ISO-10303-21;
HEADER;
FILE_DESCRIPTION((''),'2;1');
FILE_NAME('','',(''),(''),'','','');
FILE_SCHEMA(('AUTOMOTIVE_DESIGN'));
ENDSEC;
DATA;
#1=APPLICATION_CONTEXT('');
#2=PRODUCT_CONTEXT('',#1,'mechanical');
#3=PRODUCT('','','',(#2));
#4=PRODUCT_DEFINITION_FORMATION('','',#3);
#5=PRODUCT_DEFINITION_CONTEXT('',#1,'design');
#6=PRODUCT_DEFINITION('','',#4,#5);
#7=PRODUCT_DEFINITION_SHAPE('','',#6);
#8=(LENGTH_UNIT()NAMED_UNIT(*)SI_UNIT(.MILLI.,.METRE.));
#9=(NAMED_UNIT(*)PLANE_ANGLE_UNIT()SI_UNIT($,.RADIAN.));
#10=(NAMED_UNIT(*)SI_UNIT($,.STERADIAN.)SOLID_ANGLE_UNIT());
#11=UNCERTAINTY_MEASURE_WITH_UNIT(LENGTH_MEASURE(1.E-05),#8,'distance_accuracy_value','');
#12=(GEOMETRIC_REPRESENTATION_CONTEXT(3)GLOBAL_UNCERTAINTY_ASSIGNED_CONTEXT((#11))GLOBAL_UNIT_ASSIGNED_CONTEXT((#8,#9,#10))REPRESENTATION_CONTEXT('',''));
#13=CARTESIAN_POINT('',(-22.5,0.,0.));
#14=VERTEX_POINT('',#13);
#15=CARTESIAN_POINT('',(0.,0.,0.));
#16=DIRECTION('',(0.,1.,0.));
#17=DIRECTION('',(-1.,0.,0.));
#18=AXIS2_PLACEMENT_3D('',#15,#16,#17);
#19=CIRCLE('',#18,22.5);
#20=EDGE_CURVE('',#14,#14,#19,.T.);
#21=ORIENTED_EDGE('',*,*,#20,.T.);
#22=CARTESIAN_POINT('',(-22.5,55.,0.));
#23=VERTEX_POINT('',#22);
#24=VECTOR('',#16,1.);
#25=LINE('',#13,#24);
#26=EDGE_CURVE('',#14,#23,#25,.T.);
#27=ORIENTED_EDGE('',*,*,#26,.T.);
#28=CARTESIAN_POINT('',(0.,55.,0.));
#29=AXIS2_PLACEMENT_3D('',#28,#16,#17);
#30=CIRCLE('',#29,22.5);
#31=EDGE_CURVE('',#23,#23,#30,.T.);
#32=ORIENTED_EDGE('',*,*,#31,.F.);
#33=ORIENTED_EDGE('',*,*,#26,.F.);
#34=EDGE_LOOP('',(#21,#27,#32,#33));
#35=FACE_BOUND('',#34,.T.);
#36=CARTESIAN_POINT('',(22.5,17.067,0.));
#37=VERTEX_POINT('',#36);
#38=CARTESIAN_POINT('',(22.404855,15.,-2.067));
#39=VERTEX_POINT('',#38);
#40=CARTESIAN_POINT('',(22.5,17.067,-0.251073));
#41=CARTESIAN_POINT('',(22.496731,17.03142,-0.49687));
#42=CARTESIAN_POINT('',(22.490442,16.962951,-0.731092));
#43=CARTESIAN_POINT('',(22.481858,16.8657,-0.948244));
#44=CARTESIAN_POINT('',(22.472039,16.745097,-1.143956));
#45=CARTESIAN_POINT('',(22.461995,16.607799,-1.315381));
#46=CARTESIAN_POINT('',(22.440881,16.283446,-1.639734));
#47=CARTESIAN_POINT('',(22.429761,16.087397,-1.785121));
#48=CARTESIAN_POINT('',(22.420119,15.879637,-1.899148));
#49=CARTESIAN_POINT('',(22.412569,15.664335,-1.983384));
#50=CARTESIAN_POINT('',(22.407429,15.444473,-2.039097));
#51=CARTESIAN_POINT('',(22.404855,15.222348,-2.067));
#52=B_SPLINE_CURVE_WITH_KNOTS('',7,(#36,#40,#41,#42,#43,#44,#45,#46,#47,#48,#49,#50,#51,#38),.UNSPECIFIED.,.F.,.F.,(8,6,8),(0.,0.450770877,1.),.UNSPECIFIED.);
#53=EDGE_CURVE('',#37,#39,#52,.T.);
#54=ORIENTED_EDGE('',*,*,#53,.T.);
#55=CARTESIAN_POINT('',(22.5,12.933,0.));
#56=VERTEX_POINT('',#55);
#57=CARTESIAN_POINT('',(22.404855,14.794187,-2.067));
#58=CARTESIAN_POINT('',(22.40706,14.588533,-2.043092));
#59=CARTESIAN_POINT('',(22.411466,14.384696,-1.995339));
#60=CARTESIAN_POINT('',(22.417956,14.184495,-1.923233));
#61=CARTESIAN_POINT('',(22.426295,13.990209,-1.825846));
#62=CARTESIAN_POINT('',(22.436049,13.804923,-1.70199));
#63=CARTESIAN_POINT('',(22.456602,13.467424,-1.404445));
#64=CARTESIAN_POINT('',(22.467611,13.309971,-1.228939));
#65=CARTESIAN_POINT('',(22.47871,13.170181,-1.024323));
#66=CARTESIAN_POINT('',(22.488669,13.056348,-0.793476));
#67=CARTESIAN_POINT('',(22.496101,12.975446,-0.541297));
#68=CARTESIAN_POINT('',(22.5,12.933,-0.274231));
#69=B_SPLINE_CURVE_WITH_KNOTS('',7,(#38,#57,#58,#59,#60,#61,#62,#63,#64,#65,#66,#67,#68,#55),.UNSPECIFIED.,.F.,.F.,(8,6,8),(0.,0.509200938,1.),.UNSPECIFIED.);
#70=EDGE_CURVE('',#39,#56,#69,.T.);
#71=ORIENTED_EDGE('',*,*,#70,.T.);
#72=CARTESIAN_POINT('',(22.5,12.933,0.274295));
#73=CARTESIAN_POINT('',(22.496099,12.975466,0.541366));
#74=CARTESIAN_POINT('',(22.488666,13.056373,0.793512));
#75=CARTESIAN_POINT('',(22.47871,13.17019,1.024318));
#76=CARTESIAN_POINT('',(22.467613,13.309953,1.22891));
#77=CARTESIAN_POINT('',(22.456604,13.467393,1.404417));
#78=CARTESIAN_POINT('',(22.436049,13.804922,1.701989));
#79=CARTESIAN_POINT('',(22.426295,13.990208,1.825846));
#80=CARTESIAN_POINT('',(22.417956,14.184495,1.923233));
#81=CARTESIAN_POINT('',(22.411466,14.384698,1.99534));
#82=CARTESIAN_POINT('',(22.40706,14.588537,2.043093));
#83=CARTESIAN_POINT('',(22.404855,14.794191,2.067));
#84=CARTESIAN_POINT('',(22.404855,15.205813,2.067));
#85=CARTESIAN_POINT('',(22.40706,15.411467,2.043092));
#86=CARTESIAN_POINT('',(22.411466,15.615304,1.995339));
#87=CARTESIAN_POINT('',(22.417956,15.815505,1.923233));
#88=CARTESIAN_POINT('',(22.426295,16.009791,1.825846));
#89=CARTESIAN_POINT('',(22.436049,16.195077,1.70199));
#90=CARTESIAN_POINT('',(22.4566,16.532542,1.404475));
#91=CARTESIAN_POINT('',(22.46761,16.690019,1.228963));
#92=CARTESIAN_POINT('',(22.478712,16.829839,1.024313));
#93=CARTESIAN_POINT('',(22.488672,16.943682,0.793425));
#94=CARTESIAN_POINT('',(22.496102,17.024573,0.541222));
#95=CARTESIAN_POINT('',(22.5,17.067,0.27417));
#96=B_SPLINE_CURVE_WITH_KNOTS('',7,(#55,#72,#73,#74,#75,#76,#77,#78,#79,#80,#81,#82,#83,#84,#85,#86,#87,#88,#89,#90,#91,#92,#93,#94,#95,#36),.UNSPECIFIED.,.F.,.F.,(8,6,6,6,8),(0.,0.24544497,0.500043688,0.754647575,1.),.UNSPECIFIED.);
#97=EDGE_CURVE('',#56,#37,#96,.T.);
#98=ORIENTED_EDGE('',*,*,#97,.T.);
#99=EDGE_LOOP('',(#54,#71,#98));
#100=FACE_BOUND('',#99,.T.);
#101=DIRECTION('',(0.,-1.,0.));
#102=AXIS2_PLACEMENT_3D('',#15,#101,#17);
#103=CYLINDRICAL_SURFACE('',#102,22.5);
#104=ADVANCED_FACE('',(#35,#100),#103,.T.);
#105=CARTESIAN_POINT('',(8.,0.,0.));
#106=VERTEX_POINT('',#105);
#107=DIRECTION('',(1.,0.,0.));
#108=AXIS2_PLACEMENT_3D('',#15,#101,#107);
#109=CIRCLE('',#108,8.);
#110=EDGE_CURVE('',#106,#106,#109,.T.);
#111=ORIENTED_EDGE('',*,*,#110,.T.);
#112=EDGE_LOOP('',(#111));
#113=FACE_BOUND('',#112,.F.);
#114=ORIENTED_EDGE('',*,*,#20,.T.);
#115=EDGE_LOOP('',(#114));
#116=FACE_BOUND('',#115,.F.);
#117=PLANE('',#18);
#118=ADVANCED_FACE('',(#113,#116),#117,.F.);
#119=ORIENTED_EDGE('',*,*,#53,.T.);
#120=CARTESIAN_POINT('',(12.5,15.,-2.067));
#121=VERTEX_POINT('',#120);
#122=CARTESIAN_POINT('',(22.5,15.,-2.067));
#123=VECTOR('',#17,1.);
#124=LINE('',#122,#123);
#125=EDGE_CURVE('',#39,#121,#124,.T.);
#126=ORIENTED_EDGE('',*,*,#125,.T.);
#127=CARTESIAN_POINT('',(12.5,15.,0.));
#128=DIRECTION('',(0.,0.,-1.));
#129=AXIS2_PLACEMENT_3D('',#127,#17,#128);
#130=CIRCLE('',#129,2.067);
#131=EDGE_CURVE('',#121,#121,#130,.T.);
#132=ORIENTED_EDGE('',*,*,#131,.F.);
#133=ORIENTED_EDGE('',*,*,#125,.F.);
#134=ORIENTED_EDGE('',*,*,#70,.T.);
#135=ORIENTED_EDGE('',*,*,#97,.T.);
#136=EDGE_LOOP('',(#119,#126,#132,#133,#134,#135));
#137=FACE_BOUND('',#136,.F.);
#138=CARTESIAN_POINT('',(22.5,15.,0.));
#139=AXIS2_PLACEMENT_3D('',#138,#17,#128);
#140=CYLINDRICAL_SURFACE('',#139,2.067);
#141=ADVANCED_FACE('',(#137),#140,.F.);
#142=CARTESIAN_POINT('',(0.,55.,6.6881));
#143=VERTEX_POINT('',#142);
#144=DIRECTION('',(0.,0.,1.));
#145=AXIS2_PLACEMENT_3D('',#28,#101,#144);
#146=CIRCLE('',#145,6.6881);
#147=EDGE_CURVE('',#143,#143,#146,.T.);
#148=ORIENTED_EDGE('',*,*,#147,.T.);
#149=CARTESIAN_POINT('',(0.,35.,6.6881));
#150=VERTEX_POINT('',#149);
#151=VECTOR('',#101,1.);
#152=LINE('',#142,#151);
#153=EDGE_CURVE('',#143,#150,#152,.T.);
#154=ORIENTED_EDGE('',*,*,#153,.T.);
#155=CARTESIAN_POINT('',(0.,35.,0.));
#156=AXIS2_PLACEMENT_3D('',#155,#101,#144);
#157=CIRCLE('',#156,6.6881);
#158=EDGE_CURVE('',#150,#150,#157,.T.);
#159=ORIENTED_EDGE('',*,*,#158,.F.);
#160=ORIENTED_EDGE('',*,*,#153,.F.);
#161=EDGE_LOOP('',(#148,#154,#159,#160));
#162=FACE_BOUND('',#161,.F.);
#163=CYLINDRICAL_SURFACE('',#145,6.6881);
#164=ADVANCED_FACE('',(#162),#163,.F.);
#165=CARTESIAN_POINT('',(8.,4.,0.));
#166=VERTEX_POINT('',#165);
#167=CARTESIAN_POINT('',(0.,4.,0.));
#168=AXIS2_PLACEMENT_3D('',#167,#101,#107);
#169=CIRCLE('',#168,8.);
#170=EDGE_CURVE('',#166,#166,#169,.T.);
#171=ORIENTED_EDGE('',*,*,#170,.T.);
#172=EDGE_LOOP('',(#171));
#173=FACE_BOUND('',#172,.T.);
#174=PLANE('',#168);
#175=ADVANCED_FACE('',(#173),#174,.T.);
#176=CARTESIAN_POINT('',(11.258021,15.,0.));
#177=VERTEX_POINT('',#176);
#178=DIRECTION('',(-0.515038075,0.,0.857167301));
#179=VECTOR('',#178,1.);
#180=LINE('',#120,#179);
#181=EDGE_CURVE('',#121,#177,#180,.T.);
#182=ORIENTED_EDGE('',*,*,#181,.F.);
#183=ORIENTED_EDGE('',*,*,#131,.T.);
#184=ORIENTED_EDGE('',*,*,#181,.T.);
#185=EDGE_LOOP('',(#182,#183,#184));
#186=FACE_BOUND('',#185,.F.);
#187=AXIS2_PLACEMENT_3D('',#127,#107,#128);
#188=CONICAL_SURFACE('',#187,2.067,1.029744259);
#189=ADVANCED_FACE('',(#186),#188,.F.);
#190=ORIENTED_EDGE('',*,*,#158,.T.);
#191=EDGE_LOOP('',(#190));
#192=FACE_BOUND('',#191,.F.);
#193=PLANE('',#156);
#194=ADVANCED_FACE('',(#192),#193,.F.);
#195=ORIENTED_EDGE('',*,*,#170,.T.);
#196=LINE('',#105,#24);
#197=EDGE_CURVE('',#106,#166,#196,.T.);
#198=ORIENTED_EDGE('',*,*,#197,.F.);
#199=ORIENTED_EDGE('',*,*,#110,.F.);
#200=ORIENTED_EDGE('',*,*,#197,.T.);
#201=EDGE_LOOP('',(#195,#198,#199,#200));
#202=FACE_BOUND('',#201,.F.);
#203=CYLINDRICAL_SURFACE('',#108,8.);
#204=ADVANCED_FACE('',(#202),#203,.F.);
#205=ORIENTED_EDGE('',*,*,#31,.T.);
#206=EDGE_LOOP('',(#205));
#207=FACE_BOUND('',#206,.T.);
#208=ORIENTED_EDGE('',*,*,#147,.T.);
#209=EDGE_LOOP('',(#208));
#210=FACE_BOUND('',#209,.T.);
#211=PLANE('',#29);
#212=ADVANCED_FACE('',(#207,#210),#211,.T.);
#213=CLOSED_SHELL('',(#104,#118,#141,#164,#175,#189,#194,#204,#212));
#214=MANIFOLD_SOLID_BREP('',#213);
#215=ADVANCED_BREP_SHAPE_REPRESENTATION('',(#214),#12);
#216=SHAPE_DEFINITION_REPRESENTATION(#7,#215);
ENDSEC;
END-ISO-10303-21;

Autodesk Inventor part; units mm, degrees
ref_plane "YZ Plane" through (0, 0, 0) normal (1, 0, 0) x (0, 1, 0)
ref_plane "XZ Plane" through (0, 0, 0) normal (0, 1, 0) x (-1, 0, 0)
sketch "Эскиз1" plane through (0, 0, 0) normal (0, 1, 0) x (-1, 0, 0)
  circle A0 centre (0, 0) radius 22.5
  dimension "d0" = 45
extrude "Выдавливание1" add sketch "Эскиз1" along normal blind 55
sketch "Эскиз2" plane through (0, 0, 0) normal (0, -1, 0) x (1, 0, 0)
  circle A0 centre (0, 0) radius 22.5 projected
  point P0 (22.5, 0)
ref_plane "РабПлоскость1" through (22.5, 0, 0) normal (1, 0, 0) x (0, 1, 0)
sketch "Эскиз3" plane through (22.5, 0, 0) normal (1, 0, 0) x (0, 1, 0)
  line L0 (0, 0) -> (12.5, 0)
  line L1 (12.5, 0) -> (17.5, 0)
  circle A0 centre (15, 0) radius 2.5
  dimension "d3" = 12.5
  dimension "d4" = 5
hole "Отверстие1" at (22.5, 15, 0) direction (-1, 0, 0) diameter 4.134 depth 10 tip angle 118 thread size "M5x0.8" class "6H" standard "ISO Metric profile"
sketch "Эскиз4" plane through (0, 55, 0) normal (0, 1, 0) x (1, 0, 0)
  point P0 (0, 0)
  point P1 (0, 0)
hole "Отверстие2" at (0, 55, 0) direction (0, -1, 0) diameter 13.3762 depth 20 thread size "M15x1.5" class "6H" standard "ISO Metric profile"
sketch "Эскиз5" plane through (0, 0, 0) normal (0, -1, 0) x (1, 0, 0)
  circle A0 centre (0, 0) radius 8
  dimension "d27" = 16
extrude "Выдавливание2" cut sketch "Эскиз5" against normal blind 4
properties part number "17701729.304517.015"
